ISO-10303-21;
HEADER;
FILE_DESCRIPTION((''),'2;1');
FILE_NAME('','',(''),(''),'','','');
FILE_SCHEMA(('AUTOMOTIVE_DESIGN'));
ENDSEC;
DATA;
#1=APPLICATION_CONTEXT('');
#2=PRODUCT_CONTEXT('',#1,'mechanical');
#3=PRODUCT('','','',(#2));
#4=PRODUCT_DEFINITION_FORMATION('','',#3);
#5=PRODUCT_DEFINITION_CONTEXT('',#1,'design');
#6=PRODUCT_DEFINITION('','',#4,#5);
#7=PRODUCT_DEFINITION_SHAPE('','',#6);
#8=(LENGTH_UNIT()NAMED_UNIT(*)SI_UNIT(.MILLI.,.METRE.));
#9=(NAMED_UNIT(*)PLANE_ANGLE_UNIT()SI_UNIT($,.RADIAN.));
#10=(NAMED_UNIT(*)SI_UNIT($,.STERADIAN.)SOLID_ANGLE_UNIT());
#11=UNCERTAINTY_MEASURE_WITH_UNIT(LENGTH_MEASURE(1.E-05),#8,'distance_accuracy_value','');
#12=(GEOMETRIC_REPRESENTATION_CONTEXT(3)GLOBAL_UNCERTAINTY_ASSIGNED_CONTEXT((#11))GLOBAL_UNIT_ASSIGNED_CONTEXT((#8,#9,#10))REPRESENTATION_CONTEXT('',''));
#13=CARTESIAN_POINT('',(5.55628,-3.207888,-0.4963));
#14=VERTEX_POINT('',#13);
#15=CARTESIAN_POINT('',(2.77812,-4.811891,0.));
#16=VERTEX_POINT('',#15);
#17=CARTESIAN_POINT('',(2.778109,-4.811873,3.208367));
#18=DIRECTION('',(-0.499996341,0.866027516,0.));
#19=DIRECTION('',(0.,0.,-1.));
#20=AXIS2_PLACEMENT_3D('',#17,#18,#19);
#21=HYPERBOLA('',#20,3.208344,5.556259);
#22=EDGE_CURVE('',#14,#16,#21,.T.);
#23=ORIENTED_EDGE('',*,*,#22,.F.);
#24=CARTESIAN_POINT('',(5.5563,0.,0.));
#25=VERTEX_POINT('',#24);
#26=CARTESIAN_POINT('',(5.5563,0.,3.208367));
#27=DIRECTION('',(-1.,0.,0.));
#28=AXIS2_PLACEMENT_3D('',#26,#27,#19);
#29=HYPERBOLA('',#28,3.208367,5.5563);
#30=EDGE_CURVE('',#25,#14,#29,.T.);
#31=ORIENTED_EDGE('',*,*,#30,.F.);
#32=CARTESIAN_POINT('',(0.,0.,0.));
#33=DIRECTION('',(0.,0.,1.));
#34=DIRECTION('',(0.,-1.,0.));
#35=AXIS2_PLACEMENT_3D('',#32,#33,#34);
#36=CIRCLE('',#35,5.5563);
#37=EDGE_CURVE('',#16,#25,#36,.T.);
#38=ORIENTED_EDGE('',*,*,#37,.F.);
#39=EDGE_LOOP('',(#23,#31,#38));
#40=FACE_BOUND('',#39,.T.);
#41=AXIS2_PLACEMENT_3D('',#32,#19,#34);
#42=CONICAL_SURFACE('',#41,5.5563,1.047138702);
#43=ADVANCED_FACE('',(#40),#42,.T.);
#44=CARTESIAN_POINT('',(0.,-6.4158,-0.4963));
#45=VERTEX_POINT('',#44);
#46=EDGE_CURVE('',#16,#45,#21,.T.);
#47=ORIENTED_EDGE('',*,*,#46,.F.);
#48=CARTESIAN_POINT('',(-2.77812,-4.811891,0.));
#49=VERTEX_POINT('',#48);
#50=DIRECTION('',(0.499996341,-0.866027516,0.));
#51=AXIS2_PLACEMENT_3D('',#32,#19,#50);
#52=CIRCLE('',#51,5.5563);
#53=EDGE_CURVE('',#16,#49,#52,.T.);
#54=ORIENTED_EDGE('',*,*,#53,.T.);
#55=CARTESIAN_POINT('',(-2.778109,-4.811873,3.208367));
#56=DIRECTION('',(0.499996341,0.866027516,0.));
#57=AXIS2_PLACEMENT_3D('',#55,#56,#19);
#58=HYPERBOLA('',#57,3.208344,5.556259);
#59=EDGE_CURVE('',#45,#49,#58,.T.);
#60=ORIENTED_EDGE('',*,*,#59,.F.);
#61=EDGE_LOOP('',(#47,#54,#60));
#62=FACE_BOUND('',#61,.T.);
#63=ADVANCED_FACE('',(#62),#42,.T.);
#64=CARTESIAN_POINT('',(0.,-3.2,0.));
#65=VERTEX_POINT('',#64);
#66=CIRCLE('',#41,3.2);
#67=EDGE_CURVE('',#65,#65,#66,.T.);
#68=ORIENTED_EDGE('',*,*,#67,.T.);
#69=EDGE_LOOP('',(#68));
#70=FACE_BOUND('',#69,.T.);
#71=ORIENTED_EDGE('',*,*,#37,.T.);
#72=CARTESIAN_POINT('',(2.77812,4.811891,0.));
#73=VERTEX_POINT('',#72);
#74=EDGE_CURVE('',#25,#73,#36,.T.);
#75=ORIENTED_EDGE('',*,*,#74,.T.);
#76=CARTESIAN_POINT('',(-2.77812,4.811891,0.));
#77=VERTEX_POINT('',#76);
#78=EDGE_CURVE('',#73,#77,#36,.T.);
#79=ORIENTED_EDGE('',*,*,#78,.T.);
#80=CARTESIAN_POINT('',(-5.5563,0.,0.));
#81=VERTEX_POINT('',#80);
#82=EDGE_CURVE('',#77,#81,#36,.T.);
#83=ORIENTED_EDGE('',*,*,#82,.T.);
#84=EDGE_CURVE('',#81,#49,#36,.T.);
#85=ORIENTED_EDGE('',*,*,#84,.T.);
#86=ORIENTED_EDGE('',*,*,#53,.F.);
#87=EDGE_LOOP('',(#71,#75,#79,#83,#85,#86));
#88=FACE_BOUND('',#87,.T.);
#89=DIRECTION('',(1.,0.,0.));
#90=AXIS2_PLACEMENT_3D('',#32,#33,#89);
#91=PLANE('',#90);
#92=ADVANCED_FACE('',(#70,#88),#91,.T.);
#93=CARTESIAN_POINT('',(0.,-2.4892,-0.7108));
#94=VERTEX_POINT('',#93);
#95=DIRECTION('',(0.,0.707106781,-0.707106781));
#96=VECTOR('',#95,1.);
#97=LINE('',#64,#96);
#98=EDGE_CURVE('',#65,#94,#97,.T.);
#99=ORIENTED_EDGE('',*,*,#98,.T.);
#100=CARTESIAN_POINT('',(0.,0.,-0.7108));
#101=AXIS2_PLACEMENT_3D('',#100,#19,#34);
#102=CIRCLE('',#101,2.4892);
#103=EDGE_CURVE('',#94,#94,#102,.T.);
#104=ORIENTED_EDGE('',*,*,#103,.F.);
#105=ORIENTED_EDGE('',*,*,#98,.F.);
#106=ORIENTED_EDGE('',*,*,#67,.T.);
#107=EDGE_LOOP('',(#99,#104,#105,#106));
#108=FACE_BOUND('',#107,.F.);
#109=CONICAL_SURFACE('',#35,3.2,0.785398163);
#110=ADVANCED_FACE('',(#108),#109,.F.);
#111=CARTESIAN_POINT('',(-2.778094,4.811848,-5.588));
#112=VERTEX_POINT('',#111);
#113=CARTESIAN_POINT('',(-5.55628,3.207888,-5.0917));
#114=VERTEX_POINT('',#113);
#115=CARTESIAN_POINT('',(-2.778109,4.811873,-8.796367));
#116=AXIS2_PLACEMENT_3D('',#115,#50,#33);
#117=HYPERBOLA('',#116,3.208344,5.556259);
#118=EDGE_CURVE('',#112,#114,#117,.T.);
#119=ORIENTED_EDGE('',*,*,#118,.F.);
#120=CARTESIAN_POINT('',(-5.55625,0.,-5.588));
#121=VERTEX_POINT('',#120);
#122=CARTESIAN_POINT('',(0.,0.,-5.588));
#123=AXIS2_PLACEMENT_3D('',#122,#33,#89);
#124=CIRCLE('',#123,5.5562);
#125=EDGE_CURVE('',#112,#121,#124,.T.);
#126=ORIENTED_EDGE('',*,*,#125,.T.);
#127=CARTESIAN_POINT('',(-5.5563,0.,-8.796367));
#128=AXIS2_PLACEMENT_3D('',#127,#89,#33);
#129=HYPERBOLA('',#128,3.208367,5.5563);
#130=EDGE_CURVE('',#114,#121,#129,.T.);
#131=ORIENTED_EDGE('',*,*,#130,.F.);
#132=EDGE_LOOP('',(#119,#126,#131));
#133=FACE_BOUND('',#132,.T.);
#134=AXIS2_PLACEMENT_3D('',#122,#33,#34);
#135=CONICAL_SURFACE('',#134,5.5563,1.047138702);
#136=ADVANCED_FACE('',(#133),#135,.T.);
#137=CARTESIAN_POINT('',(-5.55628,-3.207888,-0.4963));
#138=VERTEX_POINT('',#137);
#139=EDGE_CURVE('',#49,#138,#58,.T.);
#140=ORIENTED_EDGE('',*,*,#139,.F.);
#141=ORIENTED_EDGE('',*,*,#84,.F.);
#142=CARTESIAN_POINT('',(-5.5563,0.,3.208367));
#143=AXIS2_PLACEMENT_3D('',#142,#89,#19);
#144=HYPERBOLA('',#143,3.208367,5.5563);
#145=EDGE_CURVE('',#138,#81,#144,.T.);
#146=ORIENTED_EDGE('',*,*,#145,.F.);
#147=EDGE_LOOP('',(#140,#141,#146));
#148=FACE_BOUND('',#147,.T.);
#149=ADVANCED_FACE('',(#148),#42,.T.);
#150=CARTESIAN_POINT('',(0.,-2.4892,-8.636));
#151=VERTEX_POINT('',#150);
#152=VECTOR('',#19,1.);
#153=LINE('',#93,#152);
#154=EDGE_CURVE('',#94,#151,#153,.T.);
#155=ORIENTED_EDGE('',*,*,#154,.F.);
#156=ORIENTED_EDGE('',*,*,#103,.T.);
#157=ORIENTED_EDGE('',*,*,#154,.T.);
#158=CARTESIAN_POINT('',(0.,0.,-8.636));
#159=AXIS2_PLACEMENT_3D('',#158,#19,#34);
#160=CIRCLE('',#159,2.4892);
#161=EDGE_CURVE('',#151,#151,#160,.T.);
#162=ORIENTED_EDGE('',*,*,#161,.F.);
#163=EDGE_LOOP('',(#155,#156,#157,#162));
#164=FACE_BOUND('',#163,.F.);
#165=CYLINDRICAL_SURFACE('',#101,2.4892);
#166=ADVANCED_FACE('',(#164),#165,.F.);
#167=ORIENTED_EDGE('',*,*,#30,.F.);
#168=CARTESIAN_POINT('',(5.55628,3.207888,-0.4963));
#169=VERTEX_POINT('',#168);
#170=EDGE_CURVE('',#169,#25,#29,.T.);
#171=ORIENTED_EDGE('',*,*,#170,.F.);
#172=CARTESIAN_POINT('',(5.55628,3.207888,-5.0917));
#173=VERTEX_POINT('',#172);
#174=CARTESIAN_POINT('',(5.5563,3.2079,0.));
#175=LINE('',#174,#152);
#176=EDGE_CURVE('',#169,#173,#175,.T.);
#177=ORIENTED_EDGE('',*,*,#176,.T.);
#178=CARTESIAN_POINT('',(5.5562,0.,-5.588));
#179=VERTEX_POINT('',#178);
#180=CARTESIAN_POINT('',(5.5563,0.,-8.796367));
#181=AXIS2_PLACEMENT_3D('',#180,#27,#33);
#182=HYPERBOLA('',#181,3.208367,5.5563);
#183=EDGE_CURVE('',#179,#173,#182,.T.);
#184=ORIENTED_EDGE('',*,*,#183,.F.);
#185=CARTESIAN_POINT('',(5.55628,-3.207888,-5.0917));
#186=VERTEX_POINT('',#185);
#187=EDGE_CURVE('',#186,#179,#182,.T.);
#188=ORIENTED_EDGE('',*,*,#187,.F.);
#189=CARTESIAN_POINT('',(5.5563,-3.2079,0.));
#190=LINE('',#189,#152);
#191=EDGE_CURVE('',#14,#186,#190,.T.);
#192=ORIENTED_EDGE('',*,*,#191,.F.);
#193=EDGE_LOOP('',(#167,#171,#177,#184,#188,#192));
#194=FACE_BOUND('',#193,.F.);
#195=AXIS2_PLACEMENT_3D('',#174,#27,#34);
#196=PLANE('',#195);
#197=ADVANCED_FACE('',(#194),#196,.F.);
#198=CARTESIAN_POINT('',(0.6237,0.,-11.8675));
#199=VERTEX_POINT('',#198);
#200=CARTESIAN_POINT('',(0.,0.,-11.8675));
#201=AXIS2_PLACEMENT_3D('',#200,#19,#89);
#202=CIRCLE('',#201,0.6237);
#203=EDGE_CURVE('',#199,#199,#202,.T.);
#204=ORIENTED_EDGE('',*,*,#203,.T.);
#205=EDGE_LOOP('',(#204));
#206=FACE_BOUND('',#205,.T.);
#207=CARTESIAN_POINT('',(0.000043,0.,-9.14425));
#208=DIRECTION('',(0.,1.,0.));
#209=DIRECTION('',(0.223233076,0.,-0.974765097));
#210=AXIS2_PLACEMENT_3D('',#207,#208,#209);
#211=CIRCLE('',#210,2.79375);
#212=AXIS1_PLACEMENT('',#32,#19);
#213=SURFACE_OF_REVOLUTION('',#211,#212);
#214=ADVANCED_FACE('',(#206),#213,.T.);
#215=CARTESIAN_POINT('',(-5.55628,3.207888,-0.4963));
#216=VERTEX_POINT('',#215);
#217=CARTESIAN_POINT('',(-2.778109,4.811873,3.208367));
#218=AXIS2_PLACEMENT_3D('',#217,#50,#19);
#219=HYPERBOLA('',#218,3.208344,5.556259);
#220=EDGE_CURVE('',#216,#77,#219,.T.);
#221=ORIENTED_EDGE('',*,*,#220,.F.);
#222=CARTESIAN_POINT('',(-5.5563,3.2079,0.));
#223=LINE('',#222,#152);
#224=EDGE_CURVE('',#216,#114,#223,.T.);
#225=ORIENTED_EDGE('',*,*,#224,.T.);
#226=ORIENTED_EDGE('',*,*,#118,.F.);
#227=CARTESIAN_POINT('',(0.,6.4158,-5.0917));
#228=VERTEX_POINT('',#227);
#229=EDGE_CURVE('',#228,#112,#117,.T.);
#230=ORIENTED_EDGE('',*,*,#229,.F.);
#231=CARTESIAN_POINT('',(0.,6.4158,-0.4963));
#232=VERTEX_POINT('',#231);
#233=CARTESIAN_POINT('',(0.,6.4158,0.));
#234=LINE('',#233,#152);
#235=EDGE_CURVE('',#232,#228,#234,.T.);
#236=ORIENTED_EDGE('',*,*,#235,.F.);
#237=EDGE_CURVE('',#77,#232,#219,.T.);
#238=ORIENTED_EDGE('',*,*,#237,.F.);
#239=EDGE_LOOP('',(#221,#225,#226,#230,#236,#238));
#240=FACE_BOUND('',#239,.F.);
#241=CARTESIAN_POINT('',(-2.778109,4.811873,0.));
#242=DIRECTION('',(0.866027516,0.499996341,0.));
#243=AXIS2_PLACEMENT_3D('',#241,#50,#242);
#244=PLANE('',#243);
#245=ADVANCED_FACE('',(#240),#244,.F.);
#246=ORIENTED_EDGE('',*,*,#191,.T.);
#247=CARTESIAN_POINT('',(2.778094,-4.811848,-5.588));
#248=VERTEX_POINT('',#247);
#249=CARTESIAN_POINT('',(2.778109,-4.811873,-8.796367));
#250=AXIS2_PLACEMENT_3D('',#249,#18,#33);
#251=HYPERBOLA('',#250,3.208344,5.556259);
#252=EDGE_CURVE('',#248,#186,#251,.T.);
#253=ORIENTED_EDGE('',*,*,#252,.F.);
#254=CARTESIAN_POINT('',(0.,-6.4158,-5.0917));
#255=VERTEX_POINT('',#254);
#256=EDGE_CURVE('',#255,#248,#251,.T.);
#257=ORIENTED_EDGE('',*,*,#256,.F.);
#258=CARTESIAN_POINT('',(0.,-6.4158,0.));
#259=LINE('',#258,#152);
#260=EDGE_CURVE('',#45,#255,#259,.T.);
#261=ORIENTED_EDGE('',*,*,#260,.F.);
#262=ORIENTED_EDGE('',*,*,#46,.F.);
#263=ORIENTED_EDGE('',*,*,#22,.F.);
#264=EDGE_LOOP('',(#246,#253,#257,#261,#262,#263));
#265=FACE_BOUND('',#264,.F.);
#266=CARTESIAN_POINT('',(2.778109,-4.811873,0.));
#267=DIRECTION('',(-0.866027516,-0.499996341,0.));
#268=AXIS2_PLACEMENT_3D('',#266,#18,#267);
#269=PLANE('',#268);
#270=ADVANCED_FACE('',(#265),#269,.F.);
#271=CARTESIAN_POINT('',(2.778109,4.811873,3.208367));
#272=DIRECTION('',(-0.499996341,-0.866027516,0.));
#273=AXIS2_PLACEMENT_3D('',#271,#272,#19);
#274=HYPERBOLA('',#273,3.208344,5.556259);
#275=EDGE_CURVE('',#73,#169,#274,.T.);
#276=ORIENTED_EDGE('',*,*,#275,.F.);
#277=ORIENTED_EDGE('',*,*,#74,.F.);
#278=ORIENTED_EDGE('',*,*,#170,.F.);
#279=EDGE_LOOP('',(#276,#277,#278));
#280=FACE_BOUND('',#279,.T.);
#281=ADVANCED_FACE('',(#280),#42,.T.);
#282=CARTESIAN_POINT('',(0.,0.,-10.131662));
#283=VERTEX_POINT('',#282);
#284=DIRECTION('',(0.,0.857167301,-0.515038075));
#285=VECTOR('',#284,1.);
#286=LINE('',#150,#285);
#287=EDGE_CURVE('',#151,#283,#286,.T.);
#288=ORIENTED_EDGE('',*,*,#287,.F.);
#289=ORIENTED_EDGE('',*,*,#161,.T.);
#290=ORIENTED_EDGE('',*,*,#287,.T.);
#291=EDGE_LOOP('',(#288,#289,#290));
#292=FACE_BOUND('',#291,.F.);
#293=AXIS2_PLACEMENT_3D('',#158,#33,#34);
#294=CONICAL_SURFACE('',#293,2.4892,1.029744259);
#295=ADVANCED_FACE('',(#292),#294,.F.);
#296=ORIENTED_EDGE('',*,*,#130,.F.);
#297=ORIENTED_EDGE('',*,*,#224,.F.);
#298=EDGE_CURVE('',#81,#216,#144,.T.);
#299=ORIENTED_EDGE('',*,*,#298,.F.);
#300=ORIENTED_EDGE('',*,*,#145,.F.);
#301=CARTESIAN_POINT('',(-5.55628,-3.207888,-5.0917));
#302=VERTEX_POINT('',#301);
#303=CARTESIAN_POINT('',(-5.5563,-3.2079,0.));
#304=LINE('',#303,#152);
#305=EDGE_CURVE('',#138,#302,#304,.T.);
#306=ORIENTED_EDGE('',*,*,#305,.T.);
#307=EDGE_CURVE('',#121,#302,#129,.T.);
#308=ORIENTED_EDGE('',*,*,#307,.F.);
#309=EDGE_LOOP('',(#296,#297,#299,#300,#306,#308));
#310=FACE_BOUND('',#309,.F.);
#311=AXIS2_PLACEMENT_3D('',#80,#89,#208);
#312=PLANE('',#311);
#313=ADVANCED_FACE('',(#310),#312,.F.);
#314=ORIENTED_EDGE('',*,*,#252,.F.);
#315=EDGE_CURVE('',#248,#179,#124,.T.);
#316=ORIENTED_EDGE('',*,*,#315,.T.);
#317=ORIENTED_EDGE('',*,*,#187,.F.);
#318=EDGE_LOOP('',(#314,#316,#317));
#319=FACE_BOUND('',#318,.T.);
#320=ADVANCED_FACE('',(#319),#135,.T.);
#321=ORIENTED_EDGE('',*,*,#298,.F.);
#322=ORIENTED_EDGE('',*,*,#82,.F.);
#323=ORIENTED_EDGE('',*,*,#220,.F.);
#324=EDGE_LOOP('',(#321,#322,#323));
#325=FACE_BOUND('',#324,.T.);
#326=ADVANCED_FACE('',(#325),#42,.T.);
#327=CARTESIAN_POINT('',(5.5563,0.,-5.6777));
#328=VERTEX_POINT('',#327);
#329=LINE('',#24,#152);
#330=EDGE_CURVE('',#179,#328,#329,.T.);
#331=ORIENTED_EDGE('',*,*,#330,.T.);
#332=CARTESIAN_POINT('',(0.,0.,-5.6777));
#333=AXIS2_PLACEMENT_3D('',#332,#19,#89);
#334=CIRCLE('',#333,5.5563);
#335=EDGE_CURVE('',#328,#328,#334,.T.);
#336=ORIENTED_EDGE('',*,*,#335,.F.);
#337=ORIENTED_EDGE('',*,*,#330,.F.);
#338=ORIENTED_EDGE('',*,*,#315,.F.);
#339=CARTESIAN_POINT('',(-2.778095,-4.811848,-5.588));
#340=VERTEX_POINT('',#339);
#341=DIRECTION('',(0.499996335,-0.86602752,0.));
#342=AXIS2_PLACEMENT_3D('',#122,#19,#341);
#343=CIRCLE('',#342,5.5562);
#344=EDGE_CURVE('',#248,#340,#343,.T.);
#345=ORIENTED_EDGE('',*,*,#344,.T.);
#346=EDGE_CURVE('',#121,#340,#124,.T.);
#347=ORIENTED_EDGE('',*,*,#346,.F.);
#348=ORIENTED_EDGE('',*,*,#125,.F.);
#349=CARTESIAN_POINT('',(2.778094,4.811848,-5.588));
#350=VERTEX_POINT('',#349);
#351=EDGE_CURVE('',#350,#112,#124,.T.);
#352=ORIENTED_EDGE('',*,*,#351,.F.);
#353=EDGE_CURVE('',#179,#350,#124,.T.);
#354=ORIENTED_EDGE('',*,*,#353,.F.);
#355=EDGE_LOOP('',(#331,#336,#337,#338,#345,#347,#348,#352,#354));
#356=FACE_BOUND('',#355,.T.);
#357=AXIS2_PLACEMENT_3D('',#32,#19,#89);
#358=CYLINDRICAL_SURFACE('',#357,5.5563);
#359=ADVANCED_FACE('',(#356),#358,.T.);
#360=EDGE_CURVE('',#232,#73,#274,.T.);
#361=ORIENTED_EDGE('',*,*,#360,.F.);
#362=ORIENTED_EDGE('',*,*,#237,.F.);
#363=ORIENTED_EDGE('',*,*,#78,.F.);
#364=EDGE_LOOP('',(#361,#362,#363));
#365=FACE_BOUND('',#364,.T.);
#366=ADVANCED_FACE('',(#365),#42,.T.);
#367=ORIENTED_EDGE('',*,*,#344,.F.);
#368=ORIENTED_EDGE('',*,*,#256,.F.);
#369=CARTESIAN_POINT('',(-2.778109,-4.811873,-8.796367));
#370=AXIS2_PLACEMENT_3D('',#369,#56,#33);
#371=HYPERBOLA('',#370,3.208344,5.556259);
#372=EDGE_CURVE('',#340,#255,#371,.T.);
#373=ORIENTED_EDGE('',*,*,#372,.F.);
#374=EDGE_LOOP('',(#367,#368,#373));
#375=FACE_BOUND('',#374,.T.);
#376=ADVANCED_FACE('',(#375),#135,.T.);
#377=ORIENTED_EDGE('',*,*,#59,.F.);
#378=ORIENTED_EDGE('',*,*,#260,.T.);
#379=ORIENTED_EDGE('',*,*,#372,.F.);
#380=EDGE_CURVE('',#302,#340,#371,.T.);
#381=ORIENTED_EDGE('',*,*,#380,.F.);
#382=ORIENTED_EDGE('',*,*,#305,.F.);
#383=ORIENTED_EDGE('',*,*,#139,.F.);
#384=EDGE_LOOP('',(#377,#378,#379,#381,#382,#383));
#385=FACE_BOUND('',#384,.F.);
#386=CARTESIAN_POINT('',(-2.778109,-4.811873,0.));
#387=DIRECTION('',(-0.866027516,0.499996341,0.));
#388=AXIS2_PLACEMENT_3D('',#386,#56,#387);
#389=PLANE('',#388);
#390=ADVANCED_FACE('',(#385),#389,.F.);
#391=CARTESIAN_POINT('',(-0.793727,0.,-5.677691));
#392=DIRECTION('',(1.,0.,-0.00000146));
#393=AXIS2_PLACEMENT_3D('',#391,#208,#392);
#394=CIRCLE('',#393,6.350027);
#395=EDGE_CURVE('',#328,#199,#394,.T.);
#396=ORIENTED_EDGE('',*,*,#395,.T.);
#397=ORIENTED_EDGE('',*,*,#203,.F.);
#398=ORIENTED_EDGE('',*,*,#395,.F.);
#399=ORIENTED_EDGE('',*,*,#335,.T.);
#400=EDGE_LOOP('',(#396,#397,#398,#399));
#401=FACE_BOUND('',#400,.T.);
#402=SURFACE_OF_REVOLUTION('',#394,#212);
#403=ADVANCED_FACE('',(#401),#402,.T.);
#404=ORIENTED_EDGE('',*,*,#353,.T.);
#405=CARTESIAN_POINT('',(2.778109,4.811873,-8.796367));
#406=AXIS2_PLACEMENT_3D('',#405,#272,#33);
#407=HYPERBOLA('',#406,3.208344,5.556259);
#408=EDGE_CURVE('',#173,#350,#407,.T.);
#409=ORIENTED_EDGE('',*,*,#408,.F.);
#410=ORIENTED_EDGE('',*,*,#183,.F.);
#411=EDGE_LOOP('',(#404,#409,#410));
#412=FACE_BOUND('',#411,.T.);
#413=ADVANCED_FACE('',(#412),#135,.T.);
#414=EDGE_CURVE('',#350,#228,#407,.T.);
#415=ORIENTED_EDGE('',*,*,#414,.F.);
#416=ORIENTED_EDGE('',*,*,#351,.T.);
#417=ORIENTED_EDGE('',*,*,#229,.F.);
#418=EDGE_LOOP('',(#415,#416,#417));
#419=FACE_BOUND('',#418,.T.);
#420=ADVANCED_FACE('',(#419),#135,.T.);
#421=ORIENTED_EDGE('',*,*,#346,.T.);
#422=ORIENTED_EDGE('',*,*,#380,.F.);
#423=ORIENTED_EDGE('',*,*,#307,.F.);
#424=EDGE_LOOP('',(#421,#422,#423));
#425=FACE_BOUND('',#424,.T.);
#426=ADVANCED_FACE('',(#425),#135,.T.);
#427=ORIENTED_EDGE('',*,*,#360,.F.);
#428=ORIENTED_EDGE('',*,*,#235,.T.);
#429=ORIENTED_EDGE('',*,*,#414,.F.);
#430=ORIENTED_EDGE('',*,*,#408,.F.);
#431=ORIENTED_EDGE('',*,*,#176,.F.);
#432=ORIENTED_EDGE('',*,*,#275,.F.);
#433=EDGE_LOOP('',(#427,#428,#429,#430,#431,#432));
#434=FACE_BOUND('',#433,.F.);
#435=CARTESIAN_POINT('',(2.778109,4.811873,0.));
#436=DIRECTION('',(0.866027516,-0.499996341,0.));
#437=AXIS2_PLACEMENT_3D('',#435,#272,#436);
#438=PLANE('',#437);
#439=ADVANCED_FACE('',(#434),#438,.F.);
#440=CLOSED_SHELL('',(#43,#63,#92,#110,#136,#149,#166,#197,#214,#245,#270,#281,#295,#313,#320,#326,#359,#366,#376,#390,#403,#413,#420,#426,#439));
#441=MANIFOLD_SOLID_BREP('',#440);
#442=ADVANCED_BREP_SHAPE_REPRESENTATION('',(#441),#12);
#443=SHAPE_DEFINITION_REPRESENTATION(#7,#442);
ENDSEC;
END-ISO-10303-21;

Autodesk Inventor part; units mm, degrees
ref_plane "YZ Plane" through (0, 0, 0) normal (1, 0, 0) x (0, 1, 0)
sketch "Sketch2" plane through (0, 0, 0) normal (0, 1, 0) x (-1, 0, 0)
  line L0 (0, 0) -> (-5.5563, 0)
  line L1 (-5.5563, 0) -> (-5.5563, -5.6777)
  arc A0 (-5.5563, -5.6777) -> (-0.6237, -11.8675) centre (0.7937, -5.6777) ccw
  arc A1 (-0.6237, -11.8675) -> (0, -11.938) centre (0, -9.144) ccw
  line L2 (0, 0) -> (0, -11.938)
  line L3 (0, 0) -> (0, -11.938)
  dimension "d1" = 11.938
  dimension "d3" = 5.5563
  dimension "d5" = 0
  dimension "d7" = 2.794
  dimension "d9" = 6.35
revolve "Revolution1" add sketch "Sketch2" angle 360 about axis through (0, 0, 0) along (0, 0, -1)
sketch "Sketch7" plane through (0, 0, 0) normal (0, 0, 1) x (1, 0, 0)
  line L0 (-5.5563, -3.2079) -> (-5.5563, 3.2079)
  line L1 (-5.5563, 3.2079) -> (0, 6.4158)
  line L2 (0, 6.4158) -> (5.5563, 3.2079)
  line L3 (5.5563, 3.2079) -> (5.5563, -3.2079)
  line L4 (5.5563, -3.2079) -> (0, -6.4158)
  line L5 (0, -6.4158) -> (-5.5563, -3.2079)
  circle A0 centre (0, 0) radius 5.5562 projected
extrude "Extrusion1" add sketch "Sketch7" against normal blind 5.588 contours L0 A0 L5 | L0 L1 A0 | A0 L4 L5 | L1 L2 A0 | A0 L3 L4 | L2 L3 A0
sketch "Sketch9" plane through (0, 0, 0) normal (1, 0, 0) x (0, 1, 0)
  line L0 (-6.4158, -5.0917) -> (-6.4158, -5.588)
  line L1 (-6.4158, -5.588) -> (-5.5563, -5.588)
  line L2 (-5.5563, -5.588) -> (-6.4158, -5.0917)
  line L3 (0, -5.6873) -> (0, -4.9925) projected
  point P0 (-6.4158, -5.588)
  dimension "d53" = 11.1125
  dimension "d54" = 30
revolve "Revolution2" cut sketch "Sketch9" angle 360 about axis through (0, 0, -10) along (0, 0, 1)
sketch "Sketch11" plane through (-5.5563, -3.2079, 0) normal (0, 0, 1) x (1, 0, 0)
  line L0 (5.5562, -3.2079) -> (0, 0) projected
  line L1 (11.1125, 6.4158) -> (11.1125, 0) projected
  line L2 (5.5563, 9.6237) -> (5.5562, -3.2079) construction
  line L3 (0, 6.4158) -> (11.1125, 0) construction
  point P0 (5.5563, 3.2079)
hole "Hole1" at (0, 0, 0) direction (0, 0, -1) diameter 4.9784 depth 8.636 tip angle 118 countersink diameter 6.4 countersink angle 90 thread size "1/4-20 UNC" class "2B" standard "ANSI Unified Screw Threads"
sketch "Sketch8" plane through (0, 0, 0) normal (1, 0, 0) x (0, 1, 0)
  line L0 (-6.4158, -0.4963) -> (-6.4158, 0)
  line L1 (-6.4158, 0) -> (-5.5563, 0)
  line L2 (-5.5563, 0) -> (-6.4158, -0.4963)
  line L3 (0, -0.5955) -> (0, 0.0993) projected
  point P0 (-6.4158, 0)
  dimension "d49" = 11.1125
  dimension "d50" = 30
revolve "Revolution3" cut sketch "Sketch8" angle 360 about axis through (0, 0, -10) along (0, 0, 1)
ref_plane "MSC_PF1" through (0, 0, 0) normal (1, 0, 0) x (0, 1, 0)
ref_plane "MSC_PT1" through (0, 0, 0) normal (0, 0, 1) x (1, 0, 0)
equation "\"d47\" = q"
equation "\"d76\" = PTC + NND"
equation "\"d79\" = tt"
equation "\"d1\" = ParH"
equation "\"d3\" = 0.5 * ParF"
equation "\"d7\" = r"
equation "\"d9\" = ParS"
equation "\"d49\" = ParF"
equation "\"d53\" = ParF"
equation "\"NND\" = 6.35"
equation "\"ParF\" = 11.1125"
equation "\"g1\" = 12.827"
equation "\"ParH\" = 11.938"
equation "\"q\" = 5.588"
equation "\"r\" = 2.794"
equation "\"ParS\" = 6.35"
equation "\"tt\" = 8.636"
equation "\"THREADDIA\" = NND"
equation "\"PTC\" = 0.05"
properties part number "ANSI B 18.2.2 - 1/4-20, LC" material "Steel, Mild"
